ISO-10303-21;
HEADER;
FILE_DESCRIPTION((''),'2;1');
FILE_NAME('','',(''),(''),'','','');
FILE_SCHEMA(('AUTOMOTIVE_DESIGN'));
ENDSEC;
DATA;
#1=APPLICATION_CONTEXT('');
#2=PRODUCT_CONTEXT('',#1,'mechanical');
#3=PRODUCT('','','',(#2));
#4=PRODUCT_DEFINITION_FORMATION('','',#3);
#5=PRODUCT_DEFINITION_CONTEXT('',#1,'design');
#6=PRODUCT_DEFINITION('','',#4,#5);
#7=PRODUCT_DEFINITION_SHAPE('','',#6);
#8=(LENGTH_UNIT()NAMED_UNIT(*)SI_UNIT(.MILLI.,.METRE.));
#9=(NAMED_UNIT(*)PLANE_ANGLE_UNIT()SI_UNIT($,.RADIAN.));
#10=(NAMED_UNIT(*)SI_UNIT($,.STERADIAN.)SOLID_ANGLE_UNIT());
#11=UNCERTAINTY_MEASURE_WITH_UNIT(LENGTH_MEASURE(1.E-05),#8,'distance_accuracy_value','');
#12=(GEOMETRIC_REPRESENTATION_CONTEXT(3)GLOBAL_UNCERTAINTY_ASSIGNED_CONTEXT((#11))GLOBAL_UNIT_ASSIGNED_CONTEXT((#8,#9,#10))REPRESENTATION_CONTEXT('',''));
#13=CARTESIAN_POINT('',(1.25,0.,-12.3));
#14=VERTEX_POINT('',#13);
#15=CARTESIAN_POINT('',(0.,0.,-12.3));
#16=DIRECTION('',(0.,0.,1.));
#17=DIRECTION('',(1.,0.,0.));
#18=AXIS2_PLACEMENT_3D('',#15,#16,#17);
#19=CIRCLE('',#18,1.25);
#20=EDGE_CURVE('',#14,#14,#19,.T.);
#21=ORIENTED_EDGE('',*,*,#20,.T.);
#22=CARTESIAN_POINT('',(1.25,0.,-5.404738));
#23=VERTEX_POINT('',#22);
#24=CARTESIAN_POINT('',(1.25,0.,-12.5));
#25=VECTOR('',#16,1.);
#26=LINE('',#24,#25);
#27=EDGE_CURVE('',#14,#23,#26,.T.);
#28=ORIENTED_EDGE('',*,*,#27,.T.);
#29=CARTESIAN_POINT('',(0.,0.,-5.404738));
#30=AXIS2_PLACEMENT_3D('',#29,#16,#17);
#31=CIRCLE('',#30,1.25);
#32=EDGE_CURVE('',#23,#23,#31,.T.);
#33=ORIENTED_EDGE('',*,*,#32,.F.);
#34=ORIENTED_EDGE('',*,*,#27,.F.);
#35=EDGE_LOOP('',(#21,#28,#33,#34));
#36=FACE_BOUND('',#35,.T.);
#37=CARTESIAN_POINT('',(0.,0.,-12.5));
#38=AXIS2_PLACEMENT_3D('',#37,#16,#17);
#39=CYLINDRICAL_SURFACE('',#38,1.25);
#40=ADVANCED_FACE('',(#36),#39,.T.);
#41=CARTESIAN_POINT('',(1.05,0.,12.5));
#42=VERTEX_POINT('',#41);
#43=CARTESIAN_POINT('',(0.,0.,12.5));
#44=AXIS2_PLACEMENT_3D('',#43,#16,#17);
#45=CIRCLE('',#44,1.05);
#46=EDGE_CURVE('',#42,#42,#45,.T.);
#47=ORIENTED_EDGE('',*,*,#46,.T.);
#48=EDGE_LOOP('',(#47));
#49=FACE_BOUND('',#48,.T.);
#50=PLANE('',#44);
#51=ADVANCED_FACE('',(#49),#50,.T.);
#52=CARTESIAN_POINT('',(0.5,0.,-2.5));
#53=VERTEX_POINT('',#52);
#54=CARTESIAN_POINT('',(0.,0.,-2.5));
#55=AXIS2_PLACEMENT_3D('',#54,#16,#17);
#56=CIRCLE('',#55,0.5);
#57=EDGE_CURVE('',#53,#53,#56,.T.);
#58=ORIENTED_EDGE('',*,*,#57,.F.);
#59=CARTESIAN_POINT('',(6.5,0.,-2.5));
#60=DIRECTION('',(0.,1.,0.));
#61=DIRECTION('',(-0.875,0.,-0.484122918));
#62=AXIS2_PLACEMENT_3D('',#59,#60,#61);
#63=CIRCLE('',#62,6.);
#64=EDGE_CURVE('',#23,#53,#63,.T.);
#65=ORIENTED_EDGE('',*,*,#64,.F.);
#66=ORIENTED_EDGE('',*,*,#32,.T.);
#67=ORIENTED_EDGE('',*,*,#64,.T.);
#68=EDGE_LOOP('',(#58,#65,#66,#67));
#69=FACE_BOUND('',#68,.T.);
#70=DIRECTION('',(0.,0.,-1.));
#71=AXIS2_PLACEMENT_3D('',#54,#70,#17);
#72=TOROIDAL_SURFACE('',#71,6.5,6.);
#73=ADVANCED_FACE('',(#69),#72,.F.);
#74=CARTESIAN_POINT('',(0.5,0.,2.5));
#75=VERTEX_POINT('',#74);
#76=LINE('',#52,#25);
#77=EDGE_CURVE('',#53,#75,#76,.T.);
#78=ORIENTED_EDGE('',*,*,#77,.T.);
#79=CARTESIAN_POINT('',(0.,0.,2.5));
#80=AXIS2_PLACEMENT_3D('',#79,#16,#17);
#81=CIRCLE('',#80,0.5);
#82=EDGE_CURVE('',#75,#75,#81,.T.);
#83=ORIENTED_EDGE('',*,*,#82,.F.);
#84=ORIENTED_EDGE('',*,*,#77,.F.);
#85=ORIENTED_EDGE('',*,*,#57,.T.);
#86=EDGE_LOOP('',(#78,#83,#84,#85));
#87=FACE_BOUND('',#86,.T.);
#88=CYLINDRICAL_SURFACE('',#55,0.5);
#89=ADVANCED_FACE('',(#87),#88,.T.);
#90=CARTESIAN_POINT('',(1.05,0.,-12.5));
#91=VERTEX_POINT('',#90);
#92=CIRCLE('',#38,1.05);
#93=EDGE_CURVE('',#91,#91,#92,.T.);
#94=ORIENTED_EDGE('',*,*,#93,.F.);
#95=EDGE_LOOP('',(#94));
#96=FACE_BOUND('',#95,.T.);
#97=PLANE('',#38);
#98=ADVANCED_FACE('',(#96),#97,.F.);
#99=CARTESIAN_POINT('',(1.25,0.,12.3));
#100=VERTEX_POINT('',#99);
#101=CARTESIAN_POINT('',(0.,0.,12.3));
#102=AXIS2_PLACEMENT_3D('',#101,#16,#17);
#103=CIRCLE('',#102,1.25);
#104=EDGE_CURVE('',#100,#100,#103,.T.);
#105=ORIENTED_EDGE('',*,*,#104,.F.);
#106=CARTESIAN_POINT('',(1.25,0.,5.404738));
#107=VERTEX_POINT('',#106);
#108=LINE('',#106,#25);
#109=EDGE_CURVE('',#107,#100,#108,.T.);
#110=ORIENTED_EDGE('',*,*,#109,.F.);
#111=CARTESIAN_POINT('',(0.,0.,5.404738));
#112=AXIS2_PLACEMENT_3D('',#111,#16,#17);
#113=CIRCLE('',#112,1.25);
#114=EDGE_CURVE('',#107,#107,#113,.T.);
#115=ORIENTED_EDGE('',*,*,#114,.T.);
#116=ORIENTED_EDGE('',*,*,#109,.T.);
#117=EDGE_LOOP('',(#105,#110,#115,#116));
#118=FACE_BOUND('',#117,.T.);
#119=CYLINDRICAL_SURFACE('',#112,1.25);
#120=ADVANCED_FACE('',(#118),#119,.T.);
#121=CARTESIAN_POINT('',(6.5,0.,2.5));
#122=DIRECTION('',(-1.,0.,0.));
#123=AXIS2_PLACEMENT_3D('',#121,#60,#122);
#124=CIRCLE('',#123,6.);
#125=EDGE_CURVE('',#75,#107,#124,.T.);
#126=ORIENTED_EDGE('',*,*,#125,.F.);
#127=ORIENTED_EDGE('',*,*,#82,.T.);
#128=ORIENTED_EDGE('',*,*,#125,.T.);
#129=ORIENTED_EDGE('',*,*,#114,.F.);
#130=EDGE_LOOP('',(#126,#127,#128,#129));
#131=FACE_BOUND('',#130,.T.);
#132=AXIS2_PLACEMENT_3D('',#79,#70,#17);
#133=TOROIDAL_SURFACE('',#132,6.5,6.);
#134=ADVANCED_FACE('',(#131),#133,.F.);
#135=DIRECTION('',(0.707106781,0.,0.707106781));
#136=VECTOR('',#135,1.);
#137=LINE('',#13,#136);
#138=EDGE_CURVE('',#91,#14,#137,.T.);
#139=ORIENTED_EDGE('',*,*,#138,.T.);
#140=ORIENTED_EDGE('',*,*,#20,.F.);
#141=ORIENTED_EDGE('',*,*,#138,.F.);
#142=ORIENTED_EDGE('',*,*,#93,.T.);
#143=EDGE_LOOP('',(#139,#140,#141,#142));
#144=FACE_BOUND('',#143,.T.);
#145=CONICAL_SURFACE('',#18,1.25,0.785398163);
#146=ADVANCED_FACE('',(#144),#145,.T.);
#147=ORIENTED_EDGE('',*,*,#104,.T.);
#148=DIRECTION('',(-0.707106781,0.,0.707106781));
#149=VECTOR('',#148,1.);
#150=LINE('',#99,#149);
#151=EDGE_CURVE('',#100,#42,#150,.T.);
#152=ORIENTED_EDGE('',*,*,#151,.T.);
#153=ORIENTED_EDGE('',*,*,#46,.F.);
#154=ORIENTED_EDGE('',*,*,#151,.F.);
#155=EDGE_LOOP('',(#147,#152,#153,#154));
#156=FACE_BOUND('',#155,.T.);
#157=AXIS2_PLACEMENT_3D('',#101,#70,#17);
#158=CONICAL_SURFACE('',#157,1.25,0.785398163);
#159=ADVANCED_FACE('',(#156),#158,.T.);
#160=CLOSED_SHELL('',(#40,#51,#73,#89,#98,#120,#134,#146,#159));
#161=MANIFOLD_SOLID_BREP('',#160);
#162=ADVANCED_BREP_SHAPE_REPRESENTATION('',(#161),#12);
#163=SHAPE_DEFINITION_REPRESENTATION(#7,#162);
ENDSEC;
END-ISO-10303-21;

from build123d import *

# Parameters (mm, degrees)
F2_SIZE = 0.2


# Not quite as in the source:
# - a feature names something its author has since deleted; it is built from what else it names


with BuildPart() as f1:
    # F0 (on Front) → F1 (revolve)
    with BuildSketch(Plane.XZ):
        with BuildLine():
            Line((0, 12.5), (0, 0))
            Line((0, 0), (0, -12.5))
            Line((0, -12.5), (1.25, -12.5))
            Line((1.25, -12.5), (1.25, -5.4047375097))
            ThreePointArc((1.25, -5.4047375097), (0.6905249807, -4), (0.5, -2.5))
            Line((0.5, -2.5), (0.5, 0))
            Line((0.5, 0), (0.5, 2.5))
            ThreePointArc((0.5, 2.5), (0.6905249807, 4), (1.25, 5.4047375097))
            Line((1.25, 5.4047375097), (1.25, 12.5))
            Line((1.25, 12.5), (0, 12.5))
        make_face()
    revolve(axis=Axis((0, 0, 6.25), (0, 0, 1)))

    # F2
    f2_edges = [f1.edges().sort_by_distance(p)[0] for p in [
        (-1.25, 0, -12.5),
        (-1.25, 0, 12.5),
    ]]
    chamfer(f2_edges, length=F2_SIZE)


solid = f1.part
